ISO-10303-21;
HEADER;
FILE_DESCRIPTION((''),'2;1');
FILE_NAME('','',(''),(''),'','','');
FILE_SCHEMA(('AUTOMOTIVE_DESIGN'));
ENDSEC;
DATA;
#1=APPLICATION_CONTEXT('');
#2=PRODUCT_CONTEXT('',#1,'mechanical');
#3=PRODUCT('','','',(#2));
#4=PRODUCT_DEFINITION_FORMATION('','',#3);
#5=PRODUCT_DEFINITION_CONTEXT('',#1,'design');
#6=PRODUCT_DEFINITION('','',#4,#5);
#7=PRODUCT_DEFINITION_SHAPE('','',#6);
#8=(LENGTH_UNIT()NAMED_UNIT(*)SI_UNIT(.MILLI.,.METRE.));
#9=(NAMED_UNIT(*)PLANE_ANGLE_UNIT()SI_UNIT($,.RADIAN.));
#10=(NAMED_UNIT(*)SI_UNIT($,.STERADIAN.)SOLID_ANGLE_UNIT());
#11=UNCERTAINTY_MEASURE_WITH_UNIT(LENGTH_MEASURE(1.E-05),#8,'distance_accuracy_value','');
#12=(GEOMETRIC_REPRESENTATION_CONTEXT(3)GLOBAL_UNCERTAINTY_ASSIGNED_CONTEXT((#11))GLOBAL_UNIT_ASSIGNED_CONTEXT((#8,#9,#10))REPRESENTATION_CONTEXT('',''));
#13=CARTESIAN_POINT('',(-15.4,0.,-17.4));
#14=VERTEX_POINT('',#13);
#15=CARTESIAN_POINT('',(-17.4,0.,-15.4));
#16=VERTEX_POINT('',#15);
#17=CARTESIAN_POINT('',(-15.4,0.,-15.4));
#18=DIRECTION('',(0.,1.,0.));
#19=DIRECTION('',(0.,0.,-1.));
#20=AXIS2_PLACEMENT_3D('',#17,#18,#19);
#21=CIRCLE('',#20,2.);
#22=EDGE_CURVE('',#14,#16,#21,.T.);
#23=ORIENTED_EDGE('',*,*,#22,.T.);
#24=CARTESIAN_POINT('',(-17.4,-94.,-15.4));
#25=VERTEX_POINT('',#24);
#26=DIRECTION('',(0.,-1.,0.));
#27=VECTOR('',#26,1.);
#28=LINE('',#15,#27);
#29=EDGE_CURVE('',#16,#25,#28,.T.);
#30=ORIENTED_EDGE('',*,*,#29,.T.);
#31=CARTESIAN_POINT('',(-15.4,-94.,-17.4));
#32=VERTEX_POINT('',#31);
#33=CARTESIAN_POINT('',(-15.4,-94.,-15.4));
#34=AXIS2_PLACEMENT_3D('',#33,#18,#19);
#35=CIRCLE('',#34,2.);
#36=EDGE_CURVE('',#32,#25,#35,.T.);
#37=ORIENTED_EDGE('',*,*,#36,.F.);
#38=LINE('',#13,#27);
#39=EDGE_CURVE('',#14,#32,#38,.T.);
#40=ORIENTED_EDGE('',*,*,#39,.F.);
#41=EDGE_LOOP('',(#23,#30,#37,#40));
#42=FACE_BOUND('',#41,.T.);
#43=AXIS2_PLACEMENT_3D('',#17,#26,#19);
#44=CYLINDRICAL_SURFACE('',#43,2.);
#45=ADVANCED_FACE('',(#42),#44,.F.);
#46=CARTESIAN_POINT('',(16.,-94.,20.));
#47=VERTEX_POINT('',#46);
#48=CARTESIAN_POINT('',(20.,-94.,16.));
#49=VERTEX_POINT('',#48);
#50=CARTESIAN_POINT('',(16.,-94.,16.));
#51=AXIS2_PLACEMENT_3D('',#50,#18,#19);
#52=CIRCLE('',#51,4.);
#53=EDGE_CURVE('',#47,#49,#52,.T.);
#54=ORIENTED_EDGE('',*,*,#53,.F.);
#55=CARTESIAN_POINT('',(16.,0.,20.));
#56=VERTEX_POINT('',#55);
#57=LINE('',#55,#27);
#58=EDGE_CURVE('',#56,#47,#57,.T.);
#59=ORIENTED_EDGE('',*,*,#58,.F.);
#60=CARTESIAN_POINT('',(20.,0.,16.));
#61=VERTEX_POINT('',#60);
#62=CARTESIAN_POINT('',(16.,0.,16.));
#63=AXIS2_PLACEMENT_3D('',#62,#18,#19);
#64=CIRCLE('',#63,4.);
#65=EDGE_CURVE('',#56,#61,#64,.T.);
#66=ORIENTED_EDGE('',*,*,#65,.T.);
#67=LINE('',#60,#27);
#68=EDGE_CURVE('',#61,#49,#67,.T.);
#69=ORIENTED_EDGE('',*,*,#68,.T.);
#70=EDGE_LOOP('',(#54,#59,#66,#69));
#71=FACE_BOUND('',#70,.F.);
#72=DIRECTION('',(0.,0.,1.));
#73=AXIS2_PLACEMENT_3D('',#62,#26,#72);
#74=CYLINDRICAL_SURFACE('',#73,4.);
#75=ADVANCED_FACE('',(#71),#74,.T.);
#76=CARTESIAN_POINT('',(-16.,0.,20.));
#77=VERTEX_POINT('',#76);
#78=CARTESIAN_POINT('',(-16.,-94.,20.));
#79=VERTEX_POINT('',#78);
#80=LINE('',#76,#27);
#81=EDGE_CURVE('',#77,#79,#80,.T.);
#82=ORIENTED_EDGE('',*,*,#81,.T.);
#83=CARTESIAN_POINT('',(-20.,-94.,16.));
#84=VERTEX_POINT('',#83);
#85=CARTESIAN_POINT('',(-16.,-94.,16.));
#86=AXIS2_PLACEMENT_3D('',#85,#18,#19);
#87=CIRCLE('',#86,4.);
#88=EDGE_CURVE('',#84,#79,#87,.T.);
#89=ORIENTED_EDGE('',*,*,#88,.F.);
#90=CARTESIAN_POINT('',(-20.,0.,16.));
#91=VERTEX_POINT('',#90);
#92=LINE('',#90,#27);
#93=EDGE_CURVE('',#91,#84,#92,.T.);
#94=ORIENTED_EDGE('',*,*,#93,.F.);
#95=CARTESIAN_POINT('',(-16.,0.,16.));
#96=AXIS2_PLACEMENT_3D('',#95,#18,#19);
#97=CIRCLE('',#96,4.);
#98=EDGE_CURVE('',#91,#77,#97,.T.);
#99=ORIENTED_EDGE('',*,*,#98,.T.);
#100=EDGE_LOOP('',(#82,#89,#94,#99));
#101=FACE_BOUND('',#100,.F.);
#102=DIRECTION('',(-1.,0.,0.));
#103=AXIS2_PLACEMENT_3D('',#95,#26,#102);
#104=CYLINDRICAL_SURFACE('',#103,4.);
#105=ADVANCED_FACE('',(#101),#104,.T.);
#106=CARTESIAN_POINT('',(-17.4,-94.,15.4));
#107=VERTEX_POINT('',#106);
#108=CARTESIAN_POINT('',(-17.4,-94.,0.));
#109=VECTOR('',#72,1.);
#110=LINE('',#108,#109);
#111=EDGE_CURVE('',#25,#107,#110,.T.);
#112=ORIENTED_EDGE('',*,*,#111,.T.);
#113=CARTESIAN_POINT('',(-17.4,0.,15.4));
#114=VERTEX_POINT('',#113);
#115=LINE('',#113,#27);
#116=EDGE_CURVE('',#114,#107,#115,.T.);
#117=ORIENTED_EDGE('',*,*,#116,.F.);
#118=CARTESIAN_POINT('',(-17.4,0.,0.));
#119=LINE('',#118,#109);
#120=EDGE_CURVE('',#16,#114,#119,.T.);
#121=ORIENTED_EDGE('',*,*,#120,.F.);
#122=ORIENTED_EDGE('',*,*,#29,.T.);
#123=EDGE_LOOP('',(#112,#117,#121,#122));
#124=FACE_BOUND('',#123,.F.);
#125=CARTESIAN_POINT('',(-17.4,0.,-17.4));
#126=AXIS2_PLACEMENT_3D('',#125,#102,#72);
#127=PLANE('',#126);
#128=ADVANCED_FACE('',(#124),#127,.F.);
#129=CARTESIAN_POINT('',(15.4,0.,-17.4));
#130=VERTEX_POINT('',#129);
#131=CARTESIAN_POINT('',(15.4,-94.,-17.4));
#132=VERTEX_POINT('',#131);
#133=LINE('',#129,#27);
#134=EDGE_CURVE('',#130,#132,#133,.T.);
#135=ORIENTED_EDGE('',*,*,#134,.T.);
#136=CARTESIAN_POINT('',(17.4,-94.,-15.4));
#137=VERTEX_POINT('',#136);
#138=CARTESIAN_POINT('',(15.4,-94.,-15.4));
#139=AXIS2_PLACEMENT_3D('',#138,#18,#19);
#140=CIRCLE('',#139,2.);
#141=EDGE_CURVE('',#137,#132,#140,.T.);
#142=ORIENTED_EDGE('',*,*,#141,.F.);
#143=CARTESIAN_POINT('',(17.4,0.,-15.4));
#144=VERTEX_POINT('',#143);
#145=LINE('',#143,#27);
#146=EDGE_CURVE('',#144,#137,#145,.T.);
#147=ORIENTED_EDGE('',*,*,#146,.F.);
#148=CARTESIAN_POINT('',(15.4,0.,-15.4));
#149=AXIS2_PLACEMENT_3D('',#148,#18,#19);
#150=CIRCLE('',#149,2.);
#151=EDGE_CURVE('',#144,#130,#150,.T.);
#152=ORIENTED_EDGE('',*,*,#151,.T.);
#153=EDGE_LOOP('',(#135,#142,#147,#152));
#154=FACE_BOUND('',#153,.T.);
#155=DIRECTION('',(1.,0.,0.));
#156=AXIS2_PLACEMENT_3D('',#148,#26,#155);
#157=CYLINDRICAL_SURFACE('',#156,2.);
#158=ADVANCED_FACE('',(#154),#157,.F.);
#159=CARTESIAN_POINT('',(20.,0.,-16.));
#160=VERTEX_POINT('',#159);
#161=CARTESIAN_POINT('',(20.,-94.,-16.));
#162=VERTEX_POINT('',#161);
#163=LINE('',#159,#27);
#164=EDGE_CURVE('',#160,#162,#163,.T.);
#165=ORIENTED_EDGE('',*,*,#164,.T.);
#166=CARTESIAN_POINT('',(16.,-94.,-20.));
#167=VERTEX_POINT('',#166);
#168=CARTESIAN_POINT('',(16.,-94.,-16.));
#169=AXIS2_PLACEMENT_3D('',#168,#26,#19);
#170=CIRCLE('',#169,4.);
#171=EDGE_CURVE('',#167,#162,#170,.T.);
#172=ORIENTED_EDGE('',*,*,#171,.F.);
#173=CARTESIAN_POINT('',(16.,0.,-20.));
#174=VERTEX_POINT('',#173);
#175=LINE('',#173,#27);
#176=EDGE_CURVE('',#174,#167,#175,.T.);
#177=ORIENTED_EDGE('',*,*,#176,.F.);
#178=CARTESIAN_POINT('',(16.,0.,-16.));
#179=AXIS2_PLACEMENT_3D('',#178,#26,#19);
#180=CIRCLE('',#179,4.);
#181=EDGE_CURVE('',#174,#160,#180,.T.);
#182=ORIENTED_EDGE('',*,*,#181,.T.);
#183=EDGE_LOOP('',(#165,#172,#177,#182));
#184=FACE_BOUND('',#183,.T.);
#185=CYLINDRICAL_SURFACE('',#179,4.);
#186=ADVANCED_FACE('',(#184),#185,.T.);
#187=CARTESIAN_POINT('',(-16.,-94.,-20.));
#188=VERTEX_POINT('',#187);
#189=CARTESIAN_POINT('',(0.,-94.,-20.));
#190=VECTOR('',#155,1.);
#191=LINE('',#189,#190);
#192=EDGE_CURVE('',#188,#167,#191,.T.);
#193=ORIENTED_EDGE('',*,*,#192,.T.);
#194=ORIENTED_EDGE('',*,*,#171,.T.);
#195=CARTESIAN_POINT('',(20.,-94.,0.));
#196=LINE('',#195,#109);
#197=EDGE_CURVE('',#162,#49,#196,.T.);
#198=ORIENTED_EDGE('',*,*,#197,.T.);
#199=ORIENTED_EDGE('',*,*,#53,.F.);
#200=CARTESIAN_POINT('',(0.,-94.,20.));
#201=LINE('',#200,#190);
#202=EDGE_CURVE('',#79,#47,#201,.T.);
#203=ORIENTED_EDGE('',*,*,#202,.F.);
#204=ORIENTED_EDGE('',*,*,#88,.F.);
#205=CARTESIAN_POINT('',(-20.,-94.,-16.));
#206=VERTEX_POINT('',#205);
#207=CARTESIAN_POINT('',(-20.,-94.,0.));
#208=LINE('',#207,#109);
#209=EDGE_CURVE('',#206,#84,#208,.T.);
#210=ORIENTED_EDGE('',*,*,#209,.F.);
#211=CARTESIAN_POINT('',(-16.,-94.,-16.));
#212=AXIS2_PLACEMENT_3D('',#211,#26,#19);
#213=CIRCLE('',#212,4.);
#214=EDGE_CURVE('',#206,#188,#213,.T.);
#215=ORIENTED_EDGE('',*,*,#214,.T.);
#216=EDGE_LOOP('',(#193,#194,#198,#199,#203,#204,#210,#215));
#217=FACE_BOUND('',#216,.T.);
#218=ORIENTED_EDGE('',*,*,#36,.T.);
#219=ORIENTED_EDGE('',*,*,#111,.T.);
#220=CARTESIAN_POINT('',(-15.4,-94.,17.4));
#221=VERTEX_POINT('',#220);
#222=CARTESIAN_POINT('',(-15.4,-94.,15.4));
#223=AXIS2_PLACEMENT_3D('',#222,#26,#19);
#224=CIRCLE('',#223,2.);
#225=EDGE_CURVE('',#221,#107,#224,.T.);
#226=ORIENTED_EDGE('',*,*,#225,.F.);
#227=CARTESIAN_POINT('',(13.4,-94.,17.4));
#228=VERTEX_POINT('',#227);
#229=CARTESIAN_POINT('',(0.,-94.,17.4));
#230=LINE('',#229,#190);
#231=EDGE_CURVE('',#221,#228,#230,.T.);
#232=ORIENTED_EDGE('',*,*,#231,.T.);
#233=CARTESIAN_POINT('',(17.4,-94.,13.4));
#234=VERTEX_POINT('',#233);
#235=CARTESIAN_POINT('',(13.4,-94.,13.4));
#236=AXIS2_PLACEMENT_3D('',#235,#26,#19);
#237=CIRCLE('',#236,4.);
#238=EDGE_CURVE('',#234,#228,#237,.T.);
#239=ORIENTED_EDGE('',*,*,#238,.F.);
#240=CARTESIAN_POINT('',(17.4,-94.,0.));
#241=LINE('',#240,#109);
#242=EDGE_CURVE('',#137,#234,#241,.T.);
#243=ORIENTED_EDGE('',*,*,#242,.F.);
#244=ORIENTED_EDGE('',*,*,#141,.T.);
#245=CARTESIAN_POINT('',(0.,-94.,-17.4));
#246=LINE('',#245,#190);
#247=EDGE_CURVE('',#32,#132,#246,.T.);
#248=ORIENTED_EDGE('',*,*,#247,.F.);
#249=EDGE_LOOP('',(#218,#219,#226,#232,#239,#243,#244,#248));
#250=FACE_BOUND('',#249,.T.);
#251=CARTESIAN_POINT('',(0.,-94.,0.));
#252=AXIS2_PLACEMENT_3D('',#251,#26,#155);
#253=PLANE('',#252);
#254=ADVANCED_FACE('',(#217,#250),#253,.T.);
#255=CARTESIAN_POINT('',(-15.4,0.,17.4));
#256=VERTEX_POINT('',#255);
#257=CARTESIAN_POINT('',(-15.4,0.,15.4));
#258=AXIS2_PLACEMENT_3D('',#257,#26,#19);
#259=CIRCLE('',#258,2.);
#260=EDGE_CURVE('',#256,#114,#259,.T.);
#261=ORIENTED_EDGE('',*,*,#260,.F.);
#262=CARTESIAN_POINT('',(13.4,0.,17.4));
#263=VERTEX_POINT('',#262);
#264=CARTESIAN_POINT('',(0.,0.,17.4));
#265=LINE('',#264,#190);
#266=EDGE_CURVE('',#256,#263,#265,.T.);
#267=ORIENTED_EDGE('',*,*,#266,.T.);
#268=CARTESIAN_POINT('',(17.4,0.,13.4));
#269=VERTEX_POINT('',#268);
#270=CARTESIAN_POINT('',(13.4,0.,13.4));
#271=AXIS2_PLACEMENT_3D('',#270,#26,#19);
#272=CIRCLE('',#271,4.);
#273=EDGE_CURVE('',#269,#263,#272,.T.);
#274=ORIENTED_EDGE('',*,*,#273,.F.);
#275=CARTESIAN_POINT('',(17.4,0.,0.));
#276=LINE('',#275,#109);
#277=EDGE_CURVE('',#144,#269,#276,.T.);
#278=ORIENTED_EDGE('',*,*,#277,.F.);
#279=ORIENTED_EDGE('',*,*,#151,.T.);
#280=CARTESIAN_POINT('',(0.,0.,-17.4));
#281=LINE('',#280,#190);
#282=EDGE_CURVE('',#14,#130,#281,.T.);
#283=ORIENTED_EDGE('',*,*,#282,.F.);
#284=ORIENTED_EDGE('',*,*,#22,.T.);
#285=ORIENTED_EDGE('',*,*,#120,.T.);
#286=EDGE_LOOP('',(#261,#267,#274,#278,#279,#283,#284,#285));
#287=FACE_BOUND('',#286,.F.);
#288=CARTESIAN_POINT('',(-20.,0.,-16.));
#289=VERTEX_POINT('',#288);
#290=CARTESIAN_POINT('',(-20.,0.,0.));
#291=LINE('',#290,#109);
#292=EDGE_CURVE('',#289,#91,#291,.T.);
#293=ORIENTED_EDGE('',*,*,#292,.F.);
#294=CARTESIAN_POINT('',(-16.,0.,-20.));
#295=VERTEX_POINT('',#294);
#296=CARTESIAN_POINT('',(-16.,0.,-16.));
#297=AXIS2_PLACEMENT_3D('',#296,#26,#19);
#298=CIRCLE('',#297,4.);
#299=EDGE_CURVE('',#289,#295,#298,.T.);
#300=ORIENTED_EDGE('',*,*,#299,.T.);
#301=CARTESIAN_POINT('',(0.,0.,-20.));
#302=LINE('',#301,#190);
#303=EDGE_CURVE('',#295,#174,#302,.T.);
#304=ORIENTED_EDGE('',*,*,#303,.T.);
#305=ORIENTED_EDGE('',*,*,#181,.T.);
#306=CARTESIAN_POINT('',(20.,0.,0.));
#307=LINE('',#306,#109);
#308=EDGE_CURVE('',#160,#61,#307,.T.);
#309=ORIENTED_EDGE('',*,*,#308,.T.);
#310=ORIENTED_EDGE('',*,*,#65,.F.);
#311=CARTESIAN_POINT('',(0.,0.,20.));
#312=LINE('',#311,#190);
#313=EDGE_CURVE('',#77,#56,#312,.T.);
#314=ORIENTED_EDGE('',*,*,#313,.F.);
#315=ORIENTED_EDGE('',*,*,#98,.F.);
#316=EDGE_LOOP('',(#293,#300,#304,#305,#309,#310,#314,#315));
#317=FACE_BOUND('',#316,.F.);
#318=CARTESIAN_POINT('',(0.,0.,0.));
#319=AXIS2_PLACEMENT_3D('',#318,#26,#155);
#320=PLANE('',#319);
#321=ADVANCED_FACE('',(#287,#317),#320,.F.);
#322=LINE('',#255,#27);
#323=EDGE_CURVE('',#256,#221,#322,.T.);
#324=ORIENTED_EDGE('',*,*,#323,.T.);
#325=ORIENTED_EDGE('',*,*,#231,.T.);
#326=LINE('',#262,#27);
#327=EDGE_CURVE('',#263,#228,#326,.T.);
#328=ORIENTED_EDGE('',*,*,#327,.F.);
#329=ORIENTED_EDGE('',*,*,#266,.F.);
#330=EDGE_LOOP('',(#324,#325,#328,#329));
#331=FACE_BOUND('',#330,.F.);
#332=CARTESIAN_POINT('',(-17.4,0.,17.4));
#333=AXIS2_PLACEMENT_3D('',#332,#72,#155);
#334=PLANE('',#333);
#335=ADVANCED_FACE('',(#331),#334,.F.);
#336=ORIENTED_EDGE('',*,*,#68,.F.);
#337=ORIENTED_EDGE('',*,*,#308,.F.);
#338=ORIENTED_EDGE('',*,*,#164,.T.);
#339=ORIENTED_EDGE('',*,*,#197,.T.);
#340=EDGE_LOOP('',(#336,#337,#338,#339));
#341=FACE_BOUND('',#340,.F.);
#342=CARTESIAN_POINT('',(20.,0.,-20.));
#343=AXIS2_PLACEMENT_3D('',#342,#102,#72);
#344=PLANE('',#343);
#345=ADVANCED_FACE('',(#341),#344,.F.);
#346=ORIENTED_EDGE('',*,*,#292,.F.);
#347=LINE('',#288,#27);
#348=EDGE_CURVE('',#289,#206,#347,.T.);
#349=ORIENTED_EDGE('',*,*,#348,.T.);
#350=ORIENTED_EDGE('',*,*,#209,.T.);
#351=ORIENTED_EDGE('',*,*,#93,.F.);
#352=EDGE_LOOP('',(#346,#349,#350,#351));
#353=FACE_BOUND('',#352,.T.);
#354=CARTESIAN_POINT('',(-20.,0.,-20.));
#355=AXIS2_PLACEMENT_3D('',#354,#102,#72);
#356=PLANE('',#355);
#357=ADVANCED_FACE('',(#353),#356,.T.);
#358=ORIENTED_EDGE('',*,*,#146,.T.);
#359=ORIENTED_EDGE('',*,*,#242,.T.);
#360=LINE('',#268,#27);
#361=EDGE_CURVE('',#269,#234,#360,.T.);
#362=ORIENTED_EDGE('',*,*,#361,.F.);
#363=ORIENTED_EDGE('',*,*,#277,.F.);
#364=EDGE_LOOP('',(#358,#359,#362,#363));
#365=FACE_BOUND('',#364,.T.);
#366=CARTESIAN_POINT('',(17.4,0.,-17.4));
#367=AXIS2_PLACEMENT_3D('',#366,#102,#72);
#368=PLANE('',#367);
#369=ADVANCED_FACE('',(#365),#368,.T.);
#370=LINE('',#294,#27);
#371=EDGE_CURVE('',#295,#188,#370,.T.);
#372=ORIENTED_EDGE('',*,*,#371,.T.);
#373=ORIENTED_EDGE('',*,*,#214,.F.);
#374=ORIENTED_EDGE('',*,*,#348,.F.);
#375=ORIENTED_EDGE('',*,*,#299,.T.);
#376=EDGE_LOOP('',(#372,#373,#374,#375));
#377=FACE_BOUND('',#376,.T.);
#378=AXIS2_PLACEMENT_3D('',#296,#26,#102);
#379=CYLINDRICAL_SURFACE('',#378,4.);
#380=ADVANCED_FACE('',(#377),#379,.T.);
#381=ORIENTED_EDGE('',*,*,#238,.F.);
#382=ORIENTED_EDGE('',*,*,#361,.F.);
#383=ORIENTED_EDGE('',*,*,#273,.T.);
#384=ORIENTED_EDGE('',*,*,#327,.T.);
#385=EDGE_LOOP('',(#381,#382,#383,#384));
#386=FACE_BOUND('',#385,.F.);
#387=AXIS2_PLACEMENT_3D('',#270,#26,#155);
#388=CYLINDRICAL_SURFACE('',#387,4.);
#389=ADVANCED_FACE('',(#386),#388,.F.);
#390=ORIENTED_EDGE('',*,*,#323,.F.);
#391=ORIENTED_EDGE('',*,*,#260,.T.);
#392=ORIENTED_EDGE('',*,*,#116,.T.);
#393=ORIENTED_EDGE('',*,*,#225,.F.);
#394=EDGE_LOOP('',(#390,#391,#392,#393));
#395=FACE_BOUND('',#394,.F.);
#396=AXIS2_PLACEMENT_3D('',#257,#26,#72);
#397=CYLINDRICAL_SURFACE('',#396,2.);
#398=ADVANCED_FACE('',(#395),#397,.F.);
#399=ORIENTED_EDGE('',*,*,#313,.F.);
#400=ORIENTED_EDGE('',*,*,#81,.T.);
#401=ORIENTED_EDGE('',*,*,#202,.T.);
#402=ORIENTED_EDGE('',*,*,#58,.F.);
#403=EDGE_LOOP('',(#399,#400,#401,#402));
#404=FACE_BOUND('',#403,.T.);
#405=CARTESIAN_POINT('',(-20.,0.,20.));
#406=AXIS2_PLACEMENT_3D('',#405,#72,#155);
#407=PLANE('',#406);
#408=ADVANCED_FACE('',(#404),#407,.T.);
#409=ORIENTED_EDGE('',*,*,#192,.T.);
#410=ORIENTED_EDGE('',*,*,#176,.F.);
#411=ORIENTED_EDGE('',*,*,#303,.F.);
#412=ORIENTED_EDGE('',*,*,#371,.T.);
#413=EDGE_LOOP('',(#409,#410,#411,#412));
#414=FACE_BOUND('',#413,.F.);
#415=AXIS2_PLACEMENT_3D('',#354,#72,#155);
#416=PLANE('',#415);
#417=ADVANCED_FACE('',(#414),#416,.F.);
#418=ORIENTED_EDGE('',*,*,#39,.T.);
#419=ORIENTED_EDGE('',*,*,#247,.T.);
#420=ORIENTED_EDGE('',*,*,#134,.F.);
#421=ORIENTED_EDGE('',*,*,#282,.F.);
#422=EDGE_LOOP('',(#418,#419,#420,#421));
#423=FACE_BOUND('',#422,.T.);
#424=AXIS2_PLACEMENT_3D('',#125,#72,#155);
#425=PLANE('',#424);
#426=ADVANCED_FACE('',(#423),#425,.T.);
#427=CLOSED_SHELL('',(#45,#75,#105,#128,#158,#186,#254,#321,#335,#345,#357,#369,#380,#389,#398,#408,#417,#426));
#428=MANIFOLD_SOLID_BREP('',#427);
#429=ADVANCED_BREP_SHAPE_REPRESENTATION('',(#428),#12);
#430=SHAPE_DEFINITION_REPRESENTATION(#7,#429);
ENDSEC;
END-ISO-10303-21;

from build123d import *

# Parameters (mm, degrees)
F0_W     = 40
F0_H     = 40
F0_W_2   = 34.8
F0_H_2   = 34.8
F1_DEPTH = 94
F2_R     = 4
F3_R     = 2


with BuildPart() as f1:
    # F0 (on Front) → F1 (new body)
    with BuildSketch(Plane.XZ):
        Rectangle(F0_W, F0_H)
        Rectangle(F0_W_2, F0_H_2, mode=Mode.SUBTRACT)
    extrude(amount=F1_DEPTH)

    # F2
    f2_edges = [f1.edges().sort_by_distance(p)[0] for p in [
        (20, -47, 20),
        (-20, -47, 20),
        (20, -47, -20),
        (-20, -47, -20),
        (17.4, -47, 17.4),
    ]]
    fillet(f2_edges, radius=F2_R)

    # F3
    f3_edges = [f1.edges().sort_by_distance(p)[0] for p in [
        (-17.4, -47, 17.4),
        (-17.4, -47, -17.4),
        (17.4, -47, -17.4),
        (16, -47, 20),
    ]]
    fillet(f3_edges, radius=F3_R)


solid = f1.part
